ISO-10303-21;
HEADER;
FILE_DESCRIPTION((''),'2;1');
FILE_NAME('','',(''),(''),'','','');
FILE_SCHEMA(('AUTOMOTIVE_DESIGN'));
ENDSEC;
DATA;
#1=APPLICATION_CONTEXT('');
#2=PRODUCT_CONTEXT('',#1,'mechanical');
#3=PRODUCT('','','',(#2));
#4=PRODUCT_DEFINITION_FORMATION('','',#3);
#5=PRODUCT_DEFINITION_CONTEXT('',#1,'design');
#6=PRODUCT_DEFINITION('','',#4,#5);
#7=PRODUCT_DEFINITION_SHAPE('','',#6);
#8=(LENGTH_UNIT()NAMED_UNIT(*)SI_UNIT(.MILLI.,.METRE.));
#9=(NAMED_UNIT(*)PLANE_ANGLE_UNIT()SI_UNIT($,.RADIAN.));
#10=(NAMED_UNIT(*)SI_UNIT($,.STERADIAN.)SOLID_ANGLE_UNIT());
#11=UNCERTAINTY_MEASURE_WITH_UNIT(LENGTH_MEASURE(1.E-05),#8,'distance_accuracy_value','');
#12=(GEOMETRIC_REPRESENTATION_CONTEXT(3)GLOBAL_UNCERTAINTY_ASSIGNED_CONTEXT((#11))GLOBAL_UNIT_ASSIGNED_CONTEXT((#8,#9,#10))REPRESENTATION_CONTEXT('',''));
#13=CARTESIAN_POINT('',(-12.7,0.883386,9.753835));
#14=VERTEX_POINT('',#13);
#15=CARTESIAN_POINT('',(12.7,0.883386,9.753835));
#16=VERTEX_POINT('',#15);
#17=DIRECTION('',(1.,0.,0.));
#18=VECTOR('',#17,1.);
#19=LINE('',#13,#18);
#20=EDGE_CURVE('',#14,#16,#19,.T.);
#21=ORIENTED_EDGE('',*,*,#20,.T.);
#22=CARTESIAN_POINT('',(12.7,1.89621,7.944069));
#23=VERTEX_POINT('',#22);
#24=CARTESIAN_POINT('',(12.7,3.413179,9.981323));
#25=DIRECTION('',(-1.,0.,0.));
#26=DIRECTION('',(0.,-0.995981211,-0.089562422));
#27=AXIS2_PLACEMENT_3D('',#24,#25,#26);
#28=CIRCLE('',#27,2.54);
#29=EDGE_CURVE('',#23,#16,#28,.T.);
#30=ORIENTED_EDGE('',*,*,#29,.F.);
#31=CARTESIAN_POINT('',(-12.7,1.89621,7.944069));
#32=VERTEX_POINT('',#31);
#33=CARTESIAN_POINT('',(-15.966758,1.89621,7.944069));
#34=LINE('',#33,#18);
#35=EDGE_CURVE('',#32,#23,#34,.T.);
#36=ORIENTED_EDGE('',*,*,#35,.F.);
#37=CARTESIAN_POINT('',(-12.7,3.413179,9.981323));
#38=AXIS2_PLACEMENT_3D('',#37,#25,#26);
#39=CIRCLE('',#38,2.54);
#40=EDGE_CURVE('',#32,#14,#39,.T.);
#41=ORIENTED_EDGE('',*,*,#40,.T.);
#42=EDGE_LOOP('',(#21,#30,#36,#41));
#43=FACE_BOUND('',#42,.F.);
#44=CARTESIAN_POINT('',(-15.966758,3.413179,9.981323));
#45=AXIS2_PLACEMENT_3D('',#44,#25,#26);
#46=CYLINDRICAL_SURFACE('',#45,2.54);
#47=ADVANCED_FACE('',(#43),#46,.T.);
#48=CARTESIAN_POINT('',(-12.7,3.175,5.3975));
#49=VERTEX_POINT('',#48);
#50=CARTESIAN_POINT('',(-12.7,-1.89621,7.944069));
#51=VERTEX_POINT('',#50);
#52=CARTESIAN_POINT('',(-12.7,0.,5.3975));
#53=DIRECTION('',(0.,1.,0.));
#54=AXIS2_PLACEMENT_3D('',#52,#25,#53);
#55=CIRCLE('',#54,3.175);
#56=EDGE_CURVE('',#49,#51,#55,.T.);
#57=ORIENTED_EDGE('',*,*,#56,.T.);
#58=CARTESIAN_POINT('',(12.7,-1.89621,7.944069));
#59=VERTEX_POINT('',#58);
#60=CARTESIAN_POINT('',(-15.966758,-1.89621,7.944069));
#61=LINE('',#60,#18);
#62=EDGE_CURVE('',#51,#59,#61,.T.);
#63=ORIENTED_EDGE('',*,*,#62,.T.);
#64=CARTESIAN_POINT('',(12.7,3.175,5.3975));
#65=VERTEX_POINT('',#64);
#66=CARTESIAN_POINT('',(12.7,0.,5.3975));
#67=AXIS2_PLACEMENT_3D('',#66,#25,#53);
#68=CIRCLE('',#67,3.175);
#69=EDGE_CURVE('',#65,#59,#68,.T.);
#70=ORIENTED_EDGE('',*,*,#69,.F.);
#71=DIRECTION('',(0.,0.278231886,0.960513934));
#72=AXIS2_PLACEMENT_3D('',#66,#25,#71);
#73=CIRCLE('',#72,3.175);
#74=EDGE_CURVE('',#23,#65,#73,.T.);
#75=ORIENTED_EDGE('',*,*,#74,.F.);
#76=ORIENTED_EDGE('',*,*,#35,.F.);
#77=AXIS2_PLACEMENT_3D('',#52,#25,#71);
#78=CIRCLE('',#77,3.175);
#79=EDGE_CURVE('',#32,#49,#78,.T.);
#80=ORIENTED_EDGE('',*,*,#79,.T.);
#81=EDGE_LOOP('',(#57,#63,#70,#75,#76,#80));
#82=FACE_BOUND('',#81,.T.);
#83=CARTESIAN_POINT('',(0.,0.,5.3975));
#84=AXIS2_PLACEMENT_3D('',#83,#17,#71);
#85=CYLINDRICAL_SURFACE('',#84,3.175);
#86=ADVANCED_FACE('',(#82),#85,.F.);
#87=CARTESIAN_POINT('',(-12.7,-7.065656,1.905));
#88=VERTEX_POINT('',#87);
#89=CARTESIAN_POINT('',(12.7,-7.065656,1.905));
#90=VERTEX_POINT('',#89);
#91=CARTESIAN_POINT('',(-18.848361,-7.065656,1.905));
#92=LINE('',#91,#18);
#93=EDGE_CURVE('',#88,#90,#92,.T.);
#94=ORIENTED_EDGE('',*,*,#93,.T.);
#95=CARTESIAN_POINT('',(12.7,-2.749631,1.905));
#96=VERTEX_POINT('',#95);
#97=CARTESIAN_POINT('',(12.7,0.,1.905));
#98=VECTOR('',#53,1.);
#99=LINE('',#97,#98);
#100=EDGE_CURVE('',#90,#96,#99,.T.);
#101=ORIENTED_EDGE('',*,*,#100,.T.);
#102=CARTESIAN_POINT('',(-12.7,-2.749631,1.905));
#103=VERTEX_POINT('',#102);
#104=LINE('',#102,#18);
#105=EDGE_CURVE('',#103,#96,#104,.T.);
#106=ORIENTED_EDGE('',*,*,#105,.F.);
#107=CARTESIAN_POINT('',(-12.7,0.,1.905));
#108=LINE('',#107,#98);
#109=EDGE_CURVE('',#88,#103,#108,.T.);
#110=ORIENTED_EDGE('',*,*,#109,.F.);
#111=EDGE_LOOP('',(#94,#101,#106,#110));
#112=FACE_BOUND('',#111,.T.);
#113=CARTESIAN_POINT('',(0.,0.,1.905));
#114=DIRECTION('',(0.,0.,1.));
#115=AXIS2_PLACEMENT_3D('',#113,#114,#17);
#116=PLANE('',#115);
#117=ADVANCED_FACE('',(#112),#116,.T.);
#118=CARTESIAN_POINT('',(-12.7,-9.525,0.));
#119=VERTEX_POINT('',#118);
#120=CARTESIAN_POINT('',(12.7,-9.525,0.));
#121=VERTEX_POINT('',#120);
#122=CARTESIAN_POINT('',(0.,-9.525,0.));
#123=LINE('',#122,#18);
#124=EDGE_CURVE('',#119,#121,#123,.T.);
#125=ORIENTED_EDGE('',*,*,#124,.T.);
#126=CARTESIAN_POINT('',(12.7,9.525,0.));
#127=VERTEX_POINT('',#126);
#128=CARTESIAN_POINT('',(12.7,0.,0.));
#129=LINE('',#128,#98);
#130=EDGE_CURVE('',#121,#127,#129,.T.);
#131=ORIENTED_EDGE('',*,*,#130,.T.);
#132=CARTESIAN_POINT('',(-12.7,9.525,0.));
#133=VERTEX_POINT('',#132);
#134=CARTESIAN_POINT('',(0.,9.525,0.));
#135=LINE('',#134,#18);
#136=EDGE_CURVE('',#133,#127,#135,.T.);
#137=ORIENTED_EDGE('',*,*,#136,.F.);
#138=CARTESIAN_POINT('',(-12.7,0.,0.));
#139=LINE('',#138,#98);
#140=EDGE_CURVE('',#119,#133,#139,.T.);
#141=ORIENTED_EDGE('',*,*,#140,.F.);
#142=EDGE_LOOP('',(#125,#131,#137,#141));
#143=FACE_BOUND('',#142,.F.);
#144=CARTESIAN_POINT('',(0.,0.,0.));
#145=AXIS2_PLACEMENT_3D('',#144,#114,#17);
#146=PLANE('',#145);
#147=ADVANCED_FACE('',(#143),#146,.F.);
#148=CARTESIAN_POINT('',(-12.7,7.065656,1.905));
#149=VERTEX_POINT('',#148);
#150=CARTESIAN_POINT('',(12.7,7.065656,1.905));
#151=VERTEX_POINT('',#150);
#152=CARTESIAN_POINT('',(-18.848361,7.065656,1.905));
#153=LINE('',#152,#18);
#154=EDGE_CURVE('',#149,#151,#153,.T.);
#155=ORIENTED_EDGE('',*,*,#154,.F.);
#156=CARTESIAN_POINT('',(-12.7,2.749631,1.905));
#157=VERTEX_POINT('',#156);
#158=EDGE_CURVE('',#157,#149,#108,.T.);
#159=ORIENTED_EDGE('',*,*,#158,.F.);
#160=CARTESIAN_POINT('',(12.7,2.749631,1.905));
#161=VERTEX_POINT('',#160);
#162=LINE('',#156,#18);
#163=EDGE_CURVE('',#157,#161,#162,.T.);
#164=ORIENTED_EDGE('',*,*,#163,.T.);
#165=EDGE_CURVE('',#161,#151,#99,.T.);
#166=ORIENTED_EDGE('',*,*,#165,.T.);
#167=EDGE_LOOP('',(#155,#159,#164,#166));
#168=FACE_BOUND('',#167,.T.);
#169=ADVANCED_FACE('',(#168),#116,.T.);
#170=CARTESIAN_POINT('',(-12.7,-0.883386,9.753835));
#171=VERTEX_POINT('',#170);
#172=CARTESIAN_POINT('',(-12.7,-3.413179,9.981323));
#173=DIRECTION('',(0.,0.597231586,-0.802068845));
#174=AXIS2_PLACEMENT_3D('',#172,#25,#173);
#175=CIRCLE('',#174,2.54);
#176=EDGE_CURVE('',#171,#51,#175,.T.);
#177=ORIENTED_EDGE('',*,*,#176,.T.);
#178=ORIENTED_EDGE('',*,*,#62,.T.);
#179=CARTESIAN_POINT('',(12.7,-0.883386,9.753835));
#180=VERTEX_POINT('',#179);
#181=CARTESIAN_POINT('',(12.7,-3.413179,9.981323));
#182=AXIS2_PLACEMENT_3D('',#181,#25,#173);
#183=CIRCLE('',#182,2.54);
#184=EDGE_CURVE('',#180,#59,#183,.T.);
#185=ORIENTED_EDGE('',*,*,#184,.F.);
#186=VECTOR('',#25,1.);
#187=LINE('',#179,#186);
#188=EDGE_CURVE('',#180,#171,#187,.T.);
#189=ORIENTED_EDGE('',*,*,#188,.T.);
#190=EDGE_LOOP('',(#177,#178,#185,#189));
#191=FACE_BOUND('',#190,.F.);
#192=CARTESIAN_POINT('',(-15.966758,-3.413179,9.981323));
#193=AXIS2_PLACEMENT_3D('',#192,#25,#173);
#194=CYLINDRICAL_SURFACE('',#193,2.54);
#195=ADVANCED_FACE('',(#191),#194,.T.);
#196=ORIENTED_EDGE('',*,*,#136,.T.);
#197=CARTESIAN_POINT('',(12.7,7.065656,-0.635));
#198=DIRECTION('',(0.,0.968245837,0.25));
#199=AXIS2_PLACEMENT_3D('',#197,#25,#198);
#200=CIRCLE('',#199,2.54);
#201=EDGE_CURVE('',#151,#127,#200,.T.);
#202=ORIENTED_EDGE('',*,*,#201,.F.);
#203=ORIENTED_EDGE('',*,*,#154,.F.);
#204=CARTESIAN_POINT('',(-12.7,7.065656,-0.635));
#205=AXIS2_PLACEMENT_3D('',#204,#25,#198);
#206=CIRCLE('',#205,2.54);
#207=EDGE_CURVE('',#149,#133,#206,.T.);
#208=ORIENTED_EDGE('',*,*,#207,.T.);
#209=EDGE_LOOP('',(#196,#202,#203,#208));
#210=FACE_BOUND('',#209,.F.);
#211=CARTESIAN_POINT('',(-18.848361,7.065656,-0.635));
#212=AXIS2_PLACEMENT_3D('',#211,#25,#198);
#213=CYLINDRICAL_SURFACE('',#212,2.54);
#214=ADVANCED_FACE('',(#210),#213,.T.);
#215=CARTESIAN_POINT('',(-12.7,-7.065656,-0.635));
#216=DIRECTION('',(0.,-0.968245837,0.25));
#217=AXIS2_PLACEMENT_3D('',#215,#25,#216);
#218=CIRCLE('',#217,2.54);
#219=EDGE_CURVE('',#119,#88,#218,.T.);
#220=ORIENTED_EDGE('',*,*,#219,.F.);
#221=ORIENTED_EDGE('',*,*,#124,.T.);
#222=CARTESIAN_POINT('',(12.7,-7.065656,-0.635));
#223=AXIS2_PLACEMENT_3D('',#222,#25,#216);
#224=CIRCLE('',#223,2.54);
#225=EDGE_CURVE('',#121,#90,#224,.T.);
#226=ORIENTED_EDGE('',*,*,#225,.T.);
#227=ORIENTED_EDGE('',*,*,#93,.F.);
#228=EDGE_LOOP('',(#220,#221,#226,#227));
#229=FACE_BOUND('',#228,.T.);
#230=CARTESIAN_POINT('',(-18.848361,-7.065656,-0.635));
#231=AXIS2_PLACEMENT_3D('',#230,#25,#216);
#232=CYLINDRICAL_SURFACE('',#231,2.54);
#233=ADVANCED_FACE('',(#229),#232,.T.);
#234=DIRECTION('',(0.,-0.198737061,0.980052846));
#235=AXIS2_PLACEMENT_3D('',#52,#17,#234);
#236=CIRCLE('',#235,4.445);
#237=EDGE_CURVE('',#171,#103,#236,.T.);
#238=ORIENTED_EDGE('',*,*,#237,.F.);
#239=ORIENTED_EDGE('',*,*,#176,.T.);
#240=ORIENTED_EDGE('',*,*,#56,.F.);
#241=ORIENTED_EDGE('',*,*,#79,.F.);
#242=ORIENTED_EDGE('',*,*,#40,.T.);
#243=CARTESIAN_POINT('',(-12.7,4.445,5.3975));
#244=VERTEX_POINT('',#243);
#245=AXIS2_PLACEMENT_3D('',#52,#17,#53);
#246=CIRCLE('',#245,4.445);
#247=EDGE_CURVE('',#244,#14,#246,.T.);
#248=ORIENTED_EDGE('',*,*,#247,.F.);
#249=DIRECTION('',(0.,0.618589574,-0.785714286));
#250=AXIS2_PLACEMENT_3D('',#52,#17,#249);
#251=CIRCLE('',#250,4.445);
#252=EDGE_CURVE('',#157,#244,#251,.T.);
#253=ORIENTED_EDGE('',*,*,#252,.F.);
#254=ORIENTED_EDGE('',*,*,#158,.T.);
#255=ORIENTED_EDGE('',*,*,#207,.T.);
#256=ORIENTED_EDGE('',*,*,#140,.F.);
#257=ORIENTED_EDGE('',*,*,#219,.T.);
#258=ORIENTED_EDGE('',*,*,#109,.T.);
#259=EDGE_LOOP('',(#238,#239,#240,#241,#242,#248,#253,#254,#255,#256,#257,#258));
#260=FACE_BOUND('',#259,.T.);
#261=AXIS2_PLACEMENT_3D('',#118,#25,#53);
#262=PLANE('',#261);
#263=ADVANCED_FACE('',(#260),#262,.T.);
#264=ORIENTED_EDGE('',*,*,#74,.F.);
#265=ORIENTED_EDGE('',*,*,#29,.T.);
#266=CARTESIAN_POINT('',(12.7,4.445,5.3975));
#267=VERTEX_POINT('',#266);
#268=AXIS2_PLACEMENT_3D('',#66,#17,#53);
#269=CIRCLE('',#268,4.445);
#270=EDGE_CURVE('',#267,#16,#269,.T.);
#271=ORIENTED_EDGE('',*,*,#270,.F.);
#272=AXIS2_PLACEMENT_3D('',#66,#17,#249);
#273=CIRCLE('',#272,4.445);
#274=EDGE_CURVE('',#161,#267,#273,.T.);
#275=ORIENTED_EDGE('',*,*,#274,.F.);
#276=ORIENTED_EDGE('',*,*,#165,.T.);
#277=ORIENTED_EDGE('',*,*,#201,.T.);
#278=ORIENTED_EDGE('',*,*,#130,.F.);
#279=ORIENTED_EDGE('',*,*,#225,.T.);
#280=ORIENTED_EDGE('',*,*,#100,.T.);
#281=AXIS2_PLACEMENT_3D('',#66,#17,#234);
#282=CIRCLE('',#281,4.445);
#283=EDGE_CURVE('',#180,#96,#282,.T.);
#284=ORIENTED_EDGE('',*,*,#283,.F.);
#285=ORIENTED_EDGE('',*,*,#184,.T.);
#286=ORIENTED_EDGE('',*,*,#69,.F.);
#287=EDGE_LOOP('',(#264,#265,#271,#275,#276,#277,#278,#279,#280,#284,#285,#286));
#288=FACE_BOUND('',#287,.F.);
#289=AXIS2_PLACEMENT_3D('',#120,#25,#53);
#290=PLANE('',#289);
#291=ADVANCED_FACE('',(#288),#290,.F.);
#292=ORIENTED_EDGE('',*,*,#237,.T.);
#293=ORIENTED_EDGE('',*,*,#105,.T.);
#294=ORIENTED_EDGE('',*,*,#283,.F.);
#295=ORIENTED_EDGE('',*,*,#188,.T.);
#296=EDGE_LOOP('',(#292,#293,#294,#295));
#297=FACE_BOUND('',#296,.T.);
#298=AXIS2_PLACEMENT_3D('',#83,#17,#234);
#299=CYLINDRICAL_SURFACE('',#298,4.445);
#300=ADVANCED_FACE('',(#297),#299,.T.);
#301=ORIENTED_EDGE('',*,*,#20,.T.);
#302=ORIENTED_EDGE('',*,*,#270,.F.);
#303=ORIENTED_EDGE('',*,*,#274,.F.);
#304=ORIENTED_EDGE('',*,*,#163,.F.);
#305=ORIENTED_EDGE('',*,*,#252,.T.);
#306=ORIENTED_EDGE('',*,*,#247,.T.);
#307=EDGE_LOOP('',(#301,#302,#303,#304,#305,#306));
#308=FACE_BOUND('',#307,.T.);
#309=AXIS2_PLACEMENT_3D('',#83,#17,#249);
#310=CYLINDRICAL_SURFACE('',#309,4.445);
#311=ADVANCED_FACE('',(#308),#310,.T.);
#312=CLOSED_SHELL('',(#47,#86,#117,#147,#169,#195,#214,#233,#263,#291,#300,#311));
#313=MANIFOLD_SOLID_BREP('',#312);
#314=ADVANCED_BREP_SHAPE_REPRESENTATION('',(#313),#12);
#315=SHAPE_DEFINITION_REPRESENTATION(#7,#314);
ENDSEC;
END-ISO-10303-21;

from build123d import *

# Parameters (mm, degrees)
F0_W        = 25.4
F0_H        = 19.05
F1_DEPTH    = 1.905
F3_DEPTH    = 12.7
F4_T1_DEPTH = 37.6967221242
F4_T3_DEPTH = 31.9335157919


# Not quite as in the source:
# - a fillet or chamfer that OpenCascade refuses, or shapes differently, is made with other operations: its cross-section is extruded or revolved along the edge and cut away or added


with BuildPart() as f1:
    # F0 (on Top) → F1 (new body)
    with BuildSketch(Plane.XY):
        Rectangle(F0_W, F0_H)
    extrude(amount=F1_DEPTH)

    # F2 (on Right) → F3 (join, symmetric)
    with BuildSketch(Plane.YZ):
        with BuildLine():
            ThreePointArc((-0.8833862371, 9.7538348994), (-4.3244369874, 6.4257362287), (-2.749630657, 1.905))
            Line((-2.749630657, 1.905), (2.749630657, 1.905))
            ThreePointArc((2.749630657, 1.905), (3.9987581366, 3.4563770351), (4.445, 5.3975))
            ThreePointArc((4.445, 5.3975), (3.4412698836, 8.2109829994), (0.8833862371, 9.7538348994))
            Line((0.8833862371, 9.7538348994), (0.8833862371, 8.4471317411))
            ThreePointArc((0.8833862371, 8.4471317411), (2.5382450929, 7.3048376336), (3.175, 5.3975))
            ThreePointArc((3.175, 5.3975), (-1.9073376336, 2.8592549071), (-0.8833862371, 8.4471317411))
            Line((-0.8833862371, 8.4471317411), (-0.8833862371, 9.7538348994))
        make_face()
    extrude(amount=F3_DEPTH, both=True)

    # F4: fillet of radius 2.54 on 4 edges, made by hand

    # F4_s2 → F4_t1 (cut)
    with BuildSketch(Plane.YZ.offset(-18.8483610621)):
        with BuildLine():
            ThreePointArc((-9.525, 0), (-8.6210815618, 1.3730463142), (-7.0656555752, 1.905))
            Line((-7.0656555752, 1.905), (-9.525, 1.905))
            Line((-9.525, 1.905), (-9.525, 0))
        make_face()
        with BuildLine():
            ThreePointArc((9.525, 0), (8.6210815618, 1.3730463142), (7.0656555752, 1.905))
            Line((7.0656555752, 1.905), (9.525, 1.905))
            Line((9.525, 1.905), (9.525, 0))
        make_face()
    extrude(amount=F4_T1_DEPTH, mode=Mode.SUBTRACT)

    # F4_s4 → F4_t3 (cut)
    with BuildSketch(Plane.YZ.offset(-15.9667578959)):
        with BuildLine():
            ThreePointArc((0.8833862371, 9.7538348994), (1.1966765002, 8.7408723938), (1.8962102849, 7.9440685845))
            ThreePointArc((1.8962102849, 7.9440685845), (1.4123764871, 8.2410572192), (0.8833862371, 8.4471317411))
            Line((0.8833862371, 8.4471317411), (0.8833862371, 9.7538348994))
        make_face()
        with BuildLine():
            ThreePointArc((-1.8962102849, 7.9440685845), (-1.1966765002, 8.7408723938), (-0.8833862371, 9.7538348994))
            Line((-0.8833862371, 9.7538348994), (-0.8833862371, 8.4471317411))
            ThreePointArc((-0.8833862371, 8.4471317411), (-1.4123764871, 8.2410572192), (-1.8962102849, 7.9440685845))
        make_face()
    extrude(amount=F4_T3_DEPTH, mode=Mode.SUBTRACT)


solid = f1.part
